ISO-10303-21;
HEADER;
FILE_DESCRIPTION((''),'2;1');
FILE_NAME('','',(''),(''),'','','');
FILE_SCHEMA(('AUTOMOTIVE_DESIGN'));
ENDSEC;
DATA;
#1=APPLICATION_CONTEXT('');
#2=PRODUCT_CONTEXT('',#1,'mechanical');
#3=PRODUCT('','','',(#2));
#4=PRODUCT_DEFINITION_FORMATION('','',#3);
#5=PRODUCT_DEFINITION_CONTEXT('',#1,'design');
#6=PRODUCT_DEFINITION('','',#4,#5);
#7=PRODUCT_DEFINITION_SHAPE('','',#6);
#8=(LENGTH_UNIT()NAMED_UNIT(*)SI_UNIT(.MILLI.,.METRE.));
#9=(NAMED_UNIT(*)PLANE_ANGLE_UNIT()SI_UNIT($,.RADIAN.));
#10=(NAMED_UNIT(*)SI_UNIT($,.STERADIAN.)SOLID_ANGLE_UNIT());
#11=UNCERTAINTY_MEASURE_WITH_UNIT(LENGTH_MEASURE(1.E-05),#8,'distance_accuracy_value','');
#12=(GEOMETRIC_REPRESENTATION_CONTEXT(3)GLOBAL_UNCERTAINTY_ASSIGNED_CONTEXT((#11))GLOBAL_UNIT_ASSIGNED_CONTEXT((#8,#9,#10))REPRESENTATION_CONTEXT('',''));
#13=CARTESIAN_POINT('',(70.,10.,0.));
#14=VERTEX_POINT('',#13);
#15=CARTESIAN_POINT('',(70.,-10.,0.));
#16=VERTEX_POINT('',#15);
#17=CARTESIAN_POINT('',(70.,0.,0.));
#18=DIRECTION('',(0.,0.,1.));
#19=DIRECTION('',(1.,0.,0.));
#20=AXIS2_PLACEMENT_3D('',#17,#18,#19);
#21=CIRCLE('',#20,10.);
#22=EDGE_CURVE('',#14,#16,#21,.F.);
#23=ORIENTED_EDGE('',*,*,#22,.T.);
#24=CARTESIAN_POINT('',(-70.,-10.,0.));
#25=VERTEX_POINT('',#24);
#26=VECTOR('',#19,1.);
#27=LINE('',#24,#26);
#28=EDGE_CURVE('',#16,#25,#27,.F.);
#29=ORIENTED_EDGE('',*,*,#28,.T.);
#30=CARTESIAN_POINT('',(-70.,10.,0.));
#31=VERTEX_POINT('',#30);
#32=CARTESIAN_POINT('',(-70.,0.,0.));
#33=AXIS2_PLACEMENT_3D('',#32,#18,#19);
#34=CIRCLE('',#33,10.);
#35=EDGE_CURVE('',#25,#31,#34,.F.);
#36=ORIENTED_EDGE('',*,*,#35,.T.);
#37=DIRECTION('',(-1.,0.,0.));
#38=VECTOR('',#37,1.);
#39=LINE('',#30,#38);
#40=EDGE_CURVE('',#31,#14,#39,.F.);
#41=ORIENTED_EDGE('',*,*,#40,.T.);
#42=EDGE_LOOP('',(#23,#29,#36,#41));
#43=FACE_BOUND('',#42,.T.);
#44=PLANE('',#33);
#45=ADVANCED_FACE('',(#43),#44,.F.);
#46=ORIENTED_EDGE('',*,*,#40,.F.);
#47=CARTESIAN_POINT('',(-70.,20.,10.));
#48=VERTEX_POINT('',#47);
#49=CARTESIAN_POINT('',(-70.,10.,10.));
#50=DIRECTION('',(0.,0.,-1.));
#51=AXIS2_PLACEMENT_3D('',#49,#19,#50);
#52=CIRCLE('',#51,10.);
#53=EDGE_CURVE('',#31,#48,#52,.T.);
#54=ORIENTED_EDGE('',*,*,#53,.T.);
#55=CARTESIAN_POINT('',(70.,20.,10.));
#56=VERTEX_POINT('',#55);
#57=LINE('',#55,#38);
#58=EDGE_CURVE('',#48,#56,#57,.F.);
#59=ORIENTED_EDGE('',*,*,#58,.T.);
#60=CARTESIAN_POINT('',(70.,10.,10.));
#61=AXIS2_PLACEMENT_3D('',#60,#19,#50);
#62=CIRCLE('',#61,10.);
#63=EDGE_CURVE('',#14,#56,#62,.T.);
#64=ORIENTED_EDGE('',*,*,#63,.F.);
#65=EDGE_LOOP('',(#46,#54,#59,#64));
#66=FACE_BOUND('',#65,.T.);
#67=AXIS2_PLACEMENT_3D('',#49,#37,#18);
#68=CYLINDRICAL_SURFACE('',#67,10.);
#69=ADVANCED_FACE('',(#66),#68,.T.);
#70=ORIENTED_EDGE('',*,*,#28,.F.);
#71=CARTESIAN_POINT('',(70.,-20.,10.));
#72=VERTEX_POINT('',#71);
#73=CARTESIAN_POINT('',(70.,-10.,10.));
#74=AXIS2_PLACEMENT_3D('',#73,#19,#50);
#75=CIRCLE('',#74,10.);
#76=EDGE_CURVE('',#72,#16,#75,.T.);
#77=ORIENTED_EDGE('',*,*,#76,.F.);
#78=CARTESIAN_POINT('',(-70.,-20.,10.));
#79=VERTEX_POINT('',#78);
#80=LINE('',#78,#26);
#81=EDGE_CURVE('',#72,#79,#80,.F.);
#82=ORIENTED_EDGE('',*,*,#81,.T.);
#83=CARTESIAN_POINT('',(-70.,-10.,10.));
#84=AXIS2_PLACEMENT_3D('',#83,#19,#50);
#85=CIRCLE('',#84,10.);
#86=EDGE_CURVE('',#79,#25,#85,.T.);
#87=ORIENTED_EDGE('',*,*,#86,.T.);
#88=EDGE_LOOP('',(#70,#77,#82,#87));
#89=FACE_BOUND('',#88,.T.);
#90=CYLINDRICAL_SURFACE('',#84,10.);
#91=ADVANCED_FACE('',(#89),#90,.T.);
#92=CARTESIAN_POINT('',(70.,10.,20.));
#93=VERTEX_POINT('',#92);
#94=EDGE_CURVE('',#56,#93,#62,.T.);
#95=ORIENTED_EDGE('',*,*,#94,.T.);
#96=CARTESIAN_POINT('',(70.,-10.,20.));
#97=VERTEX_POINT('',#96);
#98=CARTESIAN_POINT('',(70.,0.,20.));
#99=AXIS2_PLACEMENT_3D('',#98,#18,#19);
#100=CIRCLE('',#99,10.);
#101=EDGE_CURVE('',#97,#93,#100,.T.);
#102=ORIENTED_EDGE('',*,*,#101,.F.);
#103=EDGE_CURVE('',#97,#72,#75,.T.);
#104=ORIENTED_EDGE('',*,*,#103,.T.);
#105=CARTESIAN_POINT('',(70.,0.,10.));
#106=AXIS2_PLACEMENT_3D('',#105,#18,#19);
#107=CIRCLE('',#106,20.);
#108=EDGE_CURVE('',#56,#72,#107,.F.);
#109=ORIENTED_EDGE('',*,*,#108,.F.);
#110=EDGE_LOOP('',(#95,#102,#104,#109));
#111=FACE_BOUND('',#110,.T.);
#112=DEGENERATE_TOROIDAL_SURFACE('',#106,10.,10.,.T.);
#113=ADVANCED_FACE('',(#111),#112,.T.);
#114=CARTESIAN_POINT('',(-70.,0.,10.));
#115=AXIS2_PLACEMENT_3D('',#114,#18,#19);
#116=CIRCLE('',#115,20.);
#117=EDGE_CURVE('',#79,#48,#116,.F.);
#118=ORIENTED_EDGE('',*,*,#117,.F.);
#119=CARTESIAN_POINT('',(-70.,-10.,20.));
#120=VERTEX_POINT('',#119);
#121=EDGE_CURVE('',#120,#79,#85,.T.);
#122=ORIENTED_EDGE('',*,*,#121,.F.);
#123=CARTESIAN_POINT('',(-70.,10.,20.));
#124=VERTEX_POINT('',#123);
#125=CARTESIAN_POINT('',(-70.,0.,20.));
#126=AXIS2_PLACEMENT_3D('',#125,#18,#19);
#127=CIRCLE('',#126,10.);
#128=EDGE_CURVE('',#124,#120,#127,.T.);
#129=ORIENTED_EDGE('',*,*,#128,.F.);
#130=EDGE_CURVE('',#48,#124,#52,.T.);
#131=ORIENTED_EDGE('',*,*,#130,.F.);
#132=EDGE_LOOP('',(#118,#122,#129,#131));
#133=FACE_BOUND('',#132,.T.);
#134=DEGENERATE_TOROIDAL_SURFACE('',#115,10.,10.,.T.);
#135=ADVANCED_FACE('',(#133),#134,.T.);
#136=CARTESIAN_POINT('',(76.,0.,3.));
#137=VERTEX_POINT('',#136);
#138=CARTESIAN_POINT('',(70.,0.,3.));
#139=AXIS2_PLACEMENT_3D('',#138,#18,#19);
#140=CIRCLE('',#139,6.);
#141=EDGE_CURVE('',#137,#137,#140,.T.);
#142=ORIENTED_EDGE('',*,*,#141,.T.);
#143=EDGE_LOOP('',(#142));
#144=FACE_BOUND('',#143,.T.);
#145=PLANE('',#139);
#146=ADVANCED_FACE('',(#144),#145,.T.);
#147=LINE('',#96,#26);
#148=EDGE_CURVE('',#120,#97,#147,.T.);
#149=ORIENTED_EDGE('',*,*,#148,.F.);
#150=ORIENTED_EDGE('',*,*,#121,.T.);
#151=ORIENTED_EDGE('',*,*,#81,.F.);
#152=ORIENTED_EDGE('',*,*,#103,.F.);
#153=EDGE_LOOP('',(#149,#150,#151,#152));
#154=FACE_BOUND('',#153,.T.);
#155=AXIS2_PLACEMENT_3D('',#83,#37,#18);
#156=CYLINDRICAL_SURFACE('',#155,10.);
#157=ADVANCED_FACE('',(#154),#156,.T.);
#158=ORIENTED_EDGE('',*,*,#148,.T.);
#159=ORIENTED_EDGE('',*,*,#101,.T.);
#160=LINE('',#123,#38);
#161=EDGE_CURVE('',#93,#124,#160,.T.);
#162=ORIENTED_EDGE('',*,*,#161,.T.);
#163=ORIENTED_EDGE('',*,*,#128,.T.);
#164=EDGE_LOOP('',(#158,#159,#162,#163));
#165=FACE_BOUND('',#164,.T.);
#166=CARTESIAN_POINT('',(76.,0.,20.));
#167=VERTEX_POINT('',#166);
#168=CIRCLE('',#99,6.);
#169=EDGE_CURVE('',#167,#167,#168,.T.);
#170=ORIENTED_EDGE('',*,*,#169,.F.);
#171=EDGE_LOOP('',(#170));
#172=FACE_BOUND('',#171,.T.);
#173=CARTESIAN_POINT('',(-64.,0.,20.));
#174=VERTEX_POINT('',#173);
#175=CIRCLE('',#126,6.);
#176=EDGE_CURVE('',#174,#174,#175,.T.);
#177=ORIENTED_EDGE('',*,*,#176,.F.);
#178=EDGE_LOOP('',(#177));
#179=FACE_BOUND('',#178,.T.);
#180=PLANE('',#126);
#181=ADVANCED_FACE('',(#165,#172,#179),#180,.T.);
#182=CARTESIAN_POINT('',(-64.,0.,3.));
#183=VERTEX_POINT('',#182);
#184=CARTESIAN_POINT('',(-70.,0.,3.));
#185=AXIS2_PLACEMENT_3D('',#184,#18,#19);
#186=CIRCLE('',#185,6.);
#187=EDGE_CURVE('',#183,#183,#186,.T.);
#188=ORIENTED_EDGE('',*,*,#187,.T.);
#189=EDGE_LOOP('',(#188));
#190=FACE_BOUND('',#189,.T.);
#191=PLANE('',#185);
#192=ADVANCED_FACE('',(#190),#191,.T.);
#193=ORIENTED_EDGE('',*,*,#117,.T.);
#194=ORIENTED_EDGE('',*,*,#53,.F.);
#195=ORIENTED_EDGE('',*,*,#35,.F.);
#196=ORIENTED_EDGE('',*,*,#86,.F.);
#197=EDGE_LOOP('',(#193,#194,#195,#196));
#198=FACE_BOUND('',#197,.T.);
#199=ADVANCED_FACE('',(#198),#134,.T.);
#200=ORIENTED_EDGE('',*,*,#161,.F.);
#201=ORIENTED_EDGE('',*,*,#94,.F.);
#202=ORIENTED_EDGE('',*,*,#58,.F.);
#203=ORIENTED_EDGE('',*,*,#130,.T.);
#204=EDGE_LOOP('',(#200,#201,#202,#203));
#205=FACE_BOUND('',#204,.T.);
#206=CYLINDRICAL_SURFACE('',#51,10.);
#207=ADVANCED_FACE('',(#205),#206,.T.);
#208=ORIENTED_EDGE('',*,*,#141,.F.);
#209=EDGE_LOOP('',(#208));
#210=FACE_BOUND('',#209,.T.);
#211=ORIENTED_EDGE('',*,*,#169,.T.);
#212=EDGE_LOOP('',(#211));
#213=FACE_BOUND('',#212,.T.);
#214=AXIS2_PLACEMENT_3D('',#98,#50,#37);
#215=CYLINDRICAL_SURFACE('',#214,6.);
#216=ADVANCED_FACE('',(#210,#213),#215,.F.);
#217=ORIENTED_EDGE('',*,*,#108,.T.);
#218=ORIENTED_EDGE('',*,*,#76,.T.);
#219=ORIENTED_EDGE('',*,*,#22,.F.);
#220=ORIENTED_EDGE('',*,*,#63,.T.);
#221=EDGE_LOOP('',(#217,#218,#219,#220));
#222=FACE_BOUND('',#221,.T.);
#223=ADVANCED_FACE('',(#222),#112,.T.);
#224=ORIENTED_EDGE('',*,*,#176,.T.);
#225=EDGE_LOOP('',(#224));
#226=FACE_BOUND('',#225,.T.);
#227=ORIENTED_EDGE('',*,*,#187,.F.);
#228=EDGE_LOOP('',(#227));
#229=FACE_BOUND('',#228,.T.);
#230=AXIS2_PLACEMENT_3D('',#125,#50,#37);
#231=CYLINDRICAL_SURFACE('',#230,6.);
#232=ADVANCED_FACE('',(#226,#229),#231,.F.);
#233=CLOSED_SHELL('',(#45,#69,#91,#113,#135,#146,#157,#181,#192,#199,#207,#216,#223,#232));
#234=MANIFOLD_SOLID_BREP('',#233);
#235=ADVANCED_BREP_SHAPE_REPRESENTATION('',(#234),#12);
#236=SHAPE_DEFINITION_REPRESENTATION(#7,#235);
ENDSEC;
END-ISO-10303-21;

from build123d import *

# Parameters (mm, degrees)
SKETCH1_R           = 6
BOSS_EXTRUDE2_DEPTH = 20
SKETCH3_R           = 10
BOSS_EXTRUDE3_DEPTH = 3
FILLET1_R           = 10
FILLET2_R           = 10


with BuildPart() as part:
    # Sketch1 → Boss-Extrude2 (new body)
    with BuildSketch(Plane.XY):
        with BuildLine():
            Line((-70, 20), (70, 20))
            ThreePointArc((70, 20), (90, 0), (70, -20))
            Line((70, -20), (-70, -20))
            ThreePointArc((-70, -20), (-90, 0), (-70, 20))
        make_face()
        with Locations((-70, 0)):
            Circle(SKETCH1_R, mode=Mode.SUBTRACT)
        with Locations((70, 0)):
            Circle(SKETCH1_R, mode=Mode.SUBTRACT)
    extrude(amount=BOSS_EXTRUDE2_DEPTH)

    # Sketch3 → Boss-Extrude3 (add)
    with BuildSketch(Plane.XY):
        with Locations((-70, 0)):
            Circle(SKETCH3_R)
        with Locations((70, 0)):
            Circle(SKETCH3_R)
    extrude(amount=BOSS_EXTRUDE3_DEPTH)

    # Fillet1
    fillet1_edges = [part.edges().sort_by_distance(p)[0] for p in [
        (90, 0, 20),
        (0, 20, 20),
        (-90, 0, 20),
        (0, -20, 20),
    ]]
    fillet(fillet1_edges, radius=FILLET1_R)

    # Fillet2
    fillet2_edges = [part.edges().sort_by_distance(p)[0] for p in [
        (90, 0, 0),
        (0, -20, 0),
        (-90, 0, 0),
        (0, 20, 0),
    ]]
    fillet(fillet2_edges, radius=FILLET2_R - 0.0001)  # a hair under: the kernel refuses the full size


solid = part.part
